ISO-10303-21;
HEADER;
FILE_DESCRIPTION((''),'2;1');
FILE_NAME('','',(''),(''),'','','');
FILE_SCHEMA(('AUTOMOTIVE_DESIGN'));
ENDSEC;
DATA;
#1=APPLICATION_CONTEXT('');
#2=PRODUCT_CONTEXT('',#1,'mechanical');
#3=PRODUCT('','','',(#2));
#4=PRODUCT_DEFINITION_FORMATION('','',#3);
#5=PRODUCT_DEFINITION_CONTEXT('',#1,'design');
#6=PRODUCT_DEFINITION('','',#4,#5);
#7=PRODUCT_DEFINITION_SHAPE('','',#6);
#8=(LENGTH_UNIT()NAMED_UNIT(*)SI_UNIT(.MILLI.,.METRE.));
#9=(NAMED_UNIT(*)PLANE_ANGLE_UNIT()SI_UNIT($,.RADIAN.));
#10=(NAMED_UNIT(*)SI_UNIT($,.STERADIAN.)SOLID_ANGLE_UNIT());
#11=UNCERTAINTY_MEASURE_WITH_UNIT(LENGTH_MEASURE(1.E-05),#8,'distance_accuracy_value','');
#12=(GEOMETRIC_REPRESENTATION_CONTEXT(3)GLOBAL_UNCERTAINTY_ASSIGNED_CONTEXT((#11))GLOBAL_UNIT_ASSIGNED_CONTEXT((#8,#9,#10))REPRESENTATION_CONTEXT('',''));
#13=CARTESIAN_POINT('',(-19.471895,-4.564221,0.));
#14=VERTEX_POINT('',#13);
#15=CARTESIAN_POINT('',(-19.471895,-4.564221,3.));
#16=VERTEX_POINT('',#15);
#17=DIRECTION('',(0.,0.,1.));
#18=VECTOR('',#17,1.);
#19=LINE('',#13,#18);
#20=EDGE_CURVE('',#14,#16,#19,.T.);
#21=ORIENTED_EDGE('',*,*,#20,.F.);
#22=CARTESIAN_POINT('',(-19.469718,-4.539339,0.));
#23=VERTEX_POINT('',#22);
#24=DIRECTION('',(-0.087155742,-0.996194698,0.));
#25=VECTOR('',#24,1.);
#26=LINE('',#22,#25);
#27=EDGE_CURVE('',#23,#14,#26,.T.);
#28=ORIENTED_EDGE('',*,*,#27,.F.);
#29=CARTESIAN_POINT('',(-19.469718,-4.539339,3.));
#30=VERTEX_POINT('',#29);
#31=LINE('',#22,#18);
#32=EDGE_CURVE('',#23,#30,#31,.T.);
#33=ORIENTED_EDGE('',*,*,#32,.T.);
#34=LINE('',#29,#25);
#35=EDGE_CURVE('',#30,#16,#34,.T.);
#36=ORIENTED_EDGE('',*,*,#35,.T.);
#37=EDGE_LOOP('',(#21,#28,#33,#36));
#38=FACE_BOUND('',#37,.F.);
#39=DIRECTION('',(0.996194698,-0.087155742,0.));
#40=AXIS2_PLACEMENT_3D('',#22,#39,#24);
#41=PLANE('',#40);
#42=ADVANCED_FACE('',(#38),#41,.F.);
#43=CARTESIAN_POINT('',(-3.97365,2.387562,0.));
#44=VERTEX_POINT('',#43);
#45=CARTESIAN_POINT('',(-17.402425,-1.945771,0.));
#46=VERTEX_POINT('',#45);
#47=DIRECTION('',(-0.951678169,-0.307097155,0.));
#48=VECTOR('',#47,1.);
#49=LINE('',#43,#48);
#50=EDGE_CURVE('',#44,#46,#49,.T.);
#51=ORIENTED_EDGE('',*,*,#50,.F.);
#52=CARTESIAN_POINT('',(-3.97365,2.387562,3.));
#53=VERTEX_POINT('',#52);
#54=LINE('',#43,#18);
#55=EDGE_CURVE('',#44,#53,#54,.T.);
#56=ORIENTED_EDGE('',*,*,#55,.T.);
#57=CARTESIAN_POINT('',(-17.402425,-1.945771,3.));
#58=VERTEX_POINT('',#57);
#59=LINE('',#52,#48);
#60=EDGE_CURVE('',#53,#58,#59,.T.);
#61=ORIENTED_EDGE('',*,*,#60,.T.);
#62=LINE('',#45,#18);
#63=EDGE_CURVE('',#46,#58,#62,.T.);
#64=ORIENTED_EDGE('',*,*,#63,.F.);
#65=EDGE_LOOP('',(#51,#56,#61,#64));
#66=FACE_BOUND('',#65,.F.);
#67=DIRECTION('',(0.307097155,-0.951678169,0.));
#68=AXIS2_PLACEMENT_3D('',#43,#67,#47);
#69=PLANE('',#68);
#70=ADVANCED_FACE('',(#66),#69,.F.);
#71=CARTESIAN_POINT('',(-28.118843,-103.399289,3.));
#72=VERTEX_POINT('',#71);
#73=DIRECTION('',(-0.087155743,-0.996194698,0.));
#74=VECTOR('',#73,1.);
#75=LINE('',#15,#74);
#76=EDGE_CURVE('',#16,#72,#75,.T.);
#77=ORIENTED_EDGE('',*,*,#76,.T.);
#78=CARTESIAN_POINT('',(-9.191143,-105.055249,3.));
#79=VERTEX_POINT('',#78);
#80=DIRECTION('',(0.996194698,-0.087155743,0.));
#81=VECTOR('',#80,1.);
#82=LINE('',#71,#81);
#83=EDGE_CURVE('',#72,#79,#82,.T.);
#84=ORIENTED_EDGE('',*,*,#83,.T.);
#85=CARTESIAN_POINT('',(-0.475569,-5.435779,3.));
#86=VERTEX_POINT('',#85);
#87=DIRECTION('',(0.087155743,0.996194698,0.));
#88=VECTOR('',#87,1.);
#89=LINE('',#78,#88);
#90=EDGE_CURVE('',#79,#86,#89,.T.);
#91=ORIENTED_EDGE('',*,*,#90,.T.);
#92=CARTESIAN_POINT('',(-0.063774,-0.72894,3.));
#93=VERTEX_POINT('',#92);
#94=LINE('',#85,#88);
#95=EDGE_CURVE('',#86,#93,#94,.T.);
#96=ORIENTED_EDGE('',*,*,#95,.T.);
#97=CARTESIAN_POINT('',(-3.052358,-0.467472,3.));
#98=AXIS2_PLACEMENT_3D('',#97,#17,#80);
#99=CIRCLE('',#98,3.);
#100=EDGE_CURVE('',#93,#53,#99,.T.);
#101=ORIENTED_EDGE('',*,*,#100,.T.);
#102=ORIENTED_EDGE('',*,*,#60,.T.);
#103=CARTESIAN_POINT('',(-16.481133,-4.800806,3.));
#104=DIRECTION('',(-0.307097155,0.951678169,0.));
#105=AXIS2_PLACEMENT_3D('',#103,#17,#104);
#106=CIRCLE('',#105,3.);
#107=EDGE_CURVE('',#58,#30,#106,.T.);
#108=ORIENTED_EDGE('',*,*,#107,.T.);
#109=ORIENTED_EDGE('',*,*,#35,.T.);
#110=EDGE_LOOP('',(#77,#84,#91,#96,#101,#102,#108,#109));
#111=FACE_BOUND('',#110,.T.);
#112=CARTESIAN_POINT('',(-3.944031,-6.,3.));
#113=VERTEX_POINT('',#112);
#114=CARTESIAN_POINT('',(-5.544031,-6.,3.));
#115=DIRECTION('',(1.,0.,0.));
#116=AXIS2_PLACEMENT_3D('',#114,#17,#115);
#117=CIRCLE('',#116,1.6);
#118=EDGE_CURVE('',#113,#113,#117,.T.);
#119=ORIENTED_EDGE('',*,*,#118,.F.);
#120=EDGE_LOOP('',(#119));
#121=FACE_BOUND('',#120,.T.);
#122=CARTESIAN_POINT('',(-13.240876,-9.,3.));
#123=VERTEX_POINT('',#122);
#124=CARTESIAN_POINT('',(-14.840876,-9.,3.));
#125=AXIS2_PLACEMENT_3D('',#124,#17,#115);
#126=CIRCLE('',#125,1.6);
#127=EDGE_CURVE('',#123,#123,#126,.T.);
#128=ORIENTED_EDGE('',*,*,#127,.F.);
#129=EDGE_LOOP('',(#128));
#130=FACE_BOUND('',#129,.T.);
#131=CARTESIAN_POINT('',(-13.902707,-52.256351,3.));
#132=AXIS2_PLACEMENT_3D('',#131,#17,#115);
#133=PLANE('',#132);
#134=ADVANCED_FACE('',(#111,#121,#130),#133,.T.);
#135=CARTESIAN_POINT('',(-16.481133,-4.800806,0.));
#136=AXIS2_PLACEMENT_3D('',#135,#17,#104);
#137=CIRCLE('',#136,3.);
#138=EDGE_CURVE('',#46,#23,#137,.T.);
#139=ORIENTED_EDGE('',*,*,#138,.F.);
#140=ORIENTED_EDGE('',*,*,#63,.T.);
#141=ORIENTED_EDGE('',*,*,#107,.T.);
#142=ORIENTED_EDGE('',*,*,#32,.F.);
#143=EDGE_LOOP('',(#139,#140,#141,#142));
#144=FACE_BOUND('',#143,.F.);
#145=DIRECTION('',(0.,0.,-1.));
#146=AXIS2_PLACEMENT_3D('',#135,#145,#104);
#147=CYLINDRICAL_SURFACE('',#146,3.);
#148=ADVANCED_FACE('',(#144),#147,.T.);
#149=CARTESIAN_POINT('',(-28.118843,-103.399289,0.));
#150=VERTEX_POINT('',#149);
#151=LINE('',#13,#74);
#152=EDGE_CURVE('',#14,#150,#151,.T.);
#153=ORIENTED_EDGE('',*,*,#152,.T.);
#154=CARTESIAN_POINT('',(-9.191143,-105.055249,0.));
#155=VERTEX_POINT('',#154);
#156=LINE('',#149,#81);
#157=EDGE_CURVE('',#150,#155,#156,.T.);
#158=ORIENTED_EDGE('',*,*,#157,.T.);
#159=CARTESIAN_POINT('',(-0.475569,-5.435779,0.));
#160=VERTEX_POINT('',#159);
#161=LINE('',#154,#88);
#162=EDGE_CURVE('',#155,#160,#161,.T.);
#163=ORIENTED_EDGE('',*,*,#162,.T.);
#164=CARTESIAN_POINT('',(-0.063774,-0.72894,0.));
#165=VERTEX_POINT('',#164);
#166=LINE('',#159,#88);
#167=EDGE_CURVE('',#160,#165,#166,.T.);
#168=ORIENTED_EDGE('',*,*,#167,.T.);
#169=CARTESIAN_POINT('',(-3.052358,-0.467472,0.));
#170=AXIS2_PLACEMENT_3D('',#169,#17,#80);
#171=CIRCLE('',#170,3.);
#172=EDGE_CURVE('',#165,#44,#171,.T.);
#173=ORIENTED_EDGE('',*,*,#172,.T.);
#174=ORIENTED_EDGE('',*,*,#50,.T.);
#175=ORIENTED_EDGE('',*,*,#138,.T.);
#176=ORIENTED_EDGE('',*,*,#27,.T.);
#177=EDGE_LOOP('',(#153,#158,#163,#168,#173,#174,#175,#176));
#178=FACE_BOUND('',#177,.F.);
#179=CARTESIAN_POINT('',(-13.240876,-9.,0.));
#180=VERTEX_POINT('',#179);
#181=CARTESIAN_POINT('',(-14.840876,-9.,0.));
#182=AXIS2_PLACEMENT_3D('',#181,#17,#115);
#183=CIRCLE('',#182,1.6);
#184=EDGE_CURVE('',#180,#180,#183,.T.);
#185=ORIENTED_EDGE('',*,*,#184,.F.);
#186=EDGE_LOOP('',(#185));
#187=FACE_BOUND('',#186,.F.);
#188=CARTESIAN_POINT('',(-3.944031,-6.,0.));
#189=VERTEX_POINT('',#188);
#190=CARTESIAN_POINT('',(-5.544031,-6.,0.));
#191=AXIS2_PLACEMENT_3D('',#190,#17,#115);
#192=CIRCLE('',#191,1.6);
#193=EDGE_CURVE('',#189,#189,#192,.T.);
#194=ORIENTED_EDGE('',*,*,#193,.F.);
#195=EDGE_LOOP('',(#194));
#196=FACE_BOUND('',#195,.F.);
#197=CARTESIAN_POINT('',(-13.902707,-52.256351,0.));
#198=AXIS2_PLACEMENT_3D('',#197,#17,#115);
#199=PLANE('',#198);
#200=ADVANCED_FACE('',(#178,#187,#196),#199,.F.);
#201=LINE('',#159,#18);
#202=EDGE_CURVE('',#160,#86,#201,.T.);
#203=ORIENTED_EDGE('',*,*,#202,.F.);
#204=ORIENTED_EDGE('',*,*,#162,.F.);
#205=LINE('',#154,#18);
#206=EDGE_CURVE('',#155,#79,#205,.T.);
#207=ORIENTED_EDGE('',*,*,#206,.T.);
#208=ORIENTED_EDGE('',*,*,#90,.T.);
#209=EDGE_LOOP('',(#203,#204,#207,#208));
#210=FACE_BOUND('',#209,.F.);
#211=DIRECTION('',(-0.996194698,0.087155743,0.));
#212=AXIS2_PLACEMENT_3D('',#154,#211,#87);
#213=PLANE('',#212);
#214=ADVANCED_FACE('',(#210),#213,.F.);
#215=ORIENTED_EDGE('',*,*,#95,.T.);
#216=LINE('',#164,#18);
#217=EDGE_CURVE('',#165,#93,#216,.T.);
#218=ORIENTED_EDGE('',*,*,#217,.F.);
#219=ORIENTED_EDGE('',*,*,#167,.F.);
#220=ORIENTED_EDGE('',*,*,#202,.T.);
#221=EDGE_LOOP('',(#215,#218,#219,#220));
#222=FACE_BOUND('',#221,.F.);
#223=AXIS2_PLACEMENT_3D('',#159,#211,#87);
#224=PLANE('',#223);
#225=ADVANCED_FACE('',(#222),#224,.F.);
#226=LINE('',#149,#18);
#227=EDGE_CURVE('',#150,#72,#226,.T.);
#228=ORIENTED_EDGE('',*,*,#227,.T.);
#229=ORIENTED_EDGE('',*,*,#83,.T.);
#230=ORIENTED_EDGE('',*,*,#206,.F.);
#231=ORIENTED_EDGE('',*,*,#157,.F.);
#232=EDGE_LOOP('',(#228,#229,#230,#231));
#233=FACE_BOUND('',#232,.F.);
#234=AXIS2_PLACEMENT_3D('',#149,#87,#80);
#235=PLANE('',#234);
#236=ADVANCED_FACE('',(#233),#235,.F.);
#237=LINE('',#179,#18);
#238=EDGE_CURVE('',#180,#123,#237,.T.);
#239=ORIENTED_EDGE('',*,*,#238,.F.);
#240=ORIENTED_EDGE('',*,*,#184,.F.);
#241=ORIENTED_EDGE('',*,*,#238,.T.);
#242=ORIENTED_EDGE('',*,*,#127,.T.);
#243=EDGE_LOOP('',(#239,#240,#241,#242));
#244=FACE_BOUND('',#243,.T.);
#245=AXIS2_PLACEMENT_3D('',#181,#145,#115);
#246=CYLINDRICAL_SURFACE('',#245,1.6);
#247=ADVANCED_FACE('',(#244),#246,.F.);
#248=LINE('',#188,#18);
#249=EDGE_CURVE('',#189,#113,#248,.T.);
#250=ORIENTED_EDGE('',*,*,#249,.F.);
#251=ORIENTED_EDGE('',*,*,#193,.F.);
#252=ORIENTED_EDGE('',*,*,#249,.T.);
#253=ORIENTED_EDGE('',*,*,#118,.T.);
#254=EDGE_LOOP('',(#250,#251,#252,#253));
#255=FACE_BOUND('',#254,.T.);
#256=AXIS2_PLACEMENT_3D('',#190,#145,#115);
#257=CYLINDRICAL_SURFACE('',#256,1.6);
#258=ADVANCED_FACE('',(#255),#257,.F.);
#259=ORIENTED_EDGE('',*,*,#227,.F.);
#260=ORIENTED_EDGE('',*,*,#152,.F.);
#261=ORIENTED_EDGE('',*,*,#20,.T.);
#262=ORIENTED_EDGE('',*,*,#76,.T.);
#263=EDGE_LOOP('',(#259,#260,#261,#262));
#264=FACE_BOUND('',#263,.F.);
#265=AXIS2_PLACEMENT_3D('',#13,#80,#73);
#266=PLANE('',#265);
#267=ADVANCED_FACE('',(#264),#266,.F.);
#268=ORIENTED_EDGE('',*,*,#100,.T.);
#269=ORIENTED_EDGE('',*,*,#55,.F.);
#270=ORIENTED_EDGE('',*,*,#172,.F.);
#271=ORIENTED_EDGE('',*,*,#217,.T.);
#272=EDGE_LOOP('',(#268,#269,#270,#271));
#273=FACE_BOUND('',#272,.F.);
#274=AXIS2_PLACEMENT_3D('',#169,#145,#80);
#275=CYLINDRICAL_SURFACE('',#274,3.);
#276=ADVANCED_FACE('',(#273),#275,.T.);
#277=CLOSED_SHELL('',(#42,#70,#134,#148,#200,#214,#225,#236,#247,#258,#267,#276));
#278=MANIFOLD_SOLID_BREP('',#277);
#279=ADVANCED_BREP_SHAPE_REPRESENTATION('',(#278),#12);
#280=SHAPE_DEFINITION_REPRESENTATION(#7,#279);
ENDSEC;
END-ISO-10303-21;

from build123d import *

# Parameters (mm, degrees)
F0_R     = 1.6
F1_DEPTH = 3


with BuildPart() as f1:
    # F0 (on Top) → F1 (new body)
    with BuildSketch(Plane.XY):
        with BuildLine():
            Line((-19.4697175733, -4.5393385149), (-19.4718945337, -4.5642212863))
            Line((-19.4718945337, -4.5642212863), (-28.1188425534, -103.3992894107))
            Line((-28.1188425534, -103.3992894107), (-9.1911432897, -105.0552485229))
            Line((-9.1911432897, -105.0552485229), (-0.4755690149, -5.4357787137))
            Line((-0.4755690149, -5.4357787137), (-0.0637739547, -0.7289396381))
            ThreePointArc((-0.0637739547, -0.7289396381), (-1.1824461608, 1.8784665345), (-3.9736495146, 2.3875620971))
            Line((-3.9736495146, 2.3875620971), (-17.4024249446, -1.9457712363))
            ThreePointArc((-17.4024249446, -1.9457712363), (-18.8270724233, -2.930893855), (-19.4697175733, -4.5393385149))
        make_face()
        with Locations((-14.8408756973, -9)):
            Circle(F0_R, mode=Mode.SUBTRACT)
        with Locations((-5.5440311689, -6)):
            Circle(F0_R, mode=Mode.SUBTRACT)
    extrude(amount=F1_DEPTH)


solid = f1.part
